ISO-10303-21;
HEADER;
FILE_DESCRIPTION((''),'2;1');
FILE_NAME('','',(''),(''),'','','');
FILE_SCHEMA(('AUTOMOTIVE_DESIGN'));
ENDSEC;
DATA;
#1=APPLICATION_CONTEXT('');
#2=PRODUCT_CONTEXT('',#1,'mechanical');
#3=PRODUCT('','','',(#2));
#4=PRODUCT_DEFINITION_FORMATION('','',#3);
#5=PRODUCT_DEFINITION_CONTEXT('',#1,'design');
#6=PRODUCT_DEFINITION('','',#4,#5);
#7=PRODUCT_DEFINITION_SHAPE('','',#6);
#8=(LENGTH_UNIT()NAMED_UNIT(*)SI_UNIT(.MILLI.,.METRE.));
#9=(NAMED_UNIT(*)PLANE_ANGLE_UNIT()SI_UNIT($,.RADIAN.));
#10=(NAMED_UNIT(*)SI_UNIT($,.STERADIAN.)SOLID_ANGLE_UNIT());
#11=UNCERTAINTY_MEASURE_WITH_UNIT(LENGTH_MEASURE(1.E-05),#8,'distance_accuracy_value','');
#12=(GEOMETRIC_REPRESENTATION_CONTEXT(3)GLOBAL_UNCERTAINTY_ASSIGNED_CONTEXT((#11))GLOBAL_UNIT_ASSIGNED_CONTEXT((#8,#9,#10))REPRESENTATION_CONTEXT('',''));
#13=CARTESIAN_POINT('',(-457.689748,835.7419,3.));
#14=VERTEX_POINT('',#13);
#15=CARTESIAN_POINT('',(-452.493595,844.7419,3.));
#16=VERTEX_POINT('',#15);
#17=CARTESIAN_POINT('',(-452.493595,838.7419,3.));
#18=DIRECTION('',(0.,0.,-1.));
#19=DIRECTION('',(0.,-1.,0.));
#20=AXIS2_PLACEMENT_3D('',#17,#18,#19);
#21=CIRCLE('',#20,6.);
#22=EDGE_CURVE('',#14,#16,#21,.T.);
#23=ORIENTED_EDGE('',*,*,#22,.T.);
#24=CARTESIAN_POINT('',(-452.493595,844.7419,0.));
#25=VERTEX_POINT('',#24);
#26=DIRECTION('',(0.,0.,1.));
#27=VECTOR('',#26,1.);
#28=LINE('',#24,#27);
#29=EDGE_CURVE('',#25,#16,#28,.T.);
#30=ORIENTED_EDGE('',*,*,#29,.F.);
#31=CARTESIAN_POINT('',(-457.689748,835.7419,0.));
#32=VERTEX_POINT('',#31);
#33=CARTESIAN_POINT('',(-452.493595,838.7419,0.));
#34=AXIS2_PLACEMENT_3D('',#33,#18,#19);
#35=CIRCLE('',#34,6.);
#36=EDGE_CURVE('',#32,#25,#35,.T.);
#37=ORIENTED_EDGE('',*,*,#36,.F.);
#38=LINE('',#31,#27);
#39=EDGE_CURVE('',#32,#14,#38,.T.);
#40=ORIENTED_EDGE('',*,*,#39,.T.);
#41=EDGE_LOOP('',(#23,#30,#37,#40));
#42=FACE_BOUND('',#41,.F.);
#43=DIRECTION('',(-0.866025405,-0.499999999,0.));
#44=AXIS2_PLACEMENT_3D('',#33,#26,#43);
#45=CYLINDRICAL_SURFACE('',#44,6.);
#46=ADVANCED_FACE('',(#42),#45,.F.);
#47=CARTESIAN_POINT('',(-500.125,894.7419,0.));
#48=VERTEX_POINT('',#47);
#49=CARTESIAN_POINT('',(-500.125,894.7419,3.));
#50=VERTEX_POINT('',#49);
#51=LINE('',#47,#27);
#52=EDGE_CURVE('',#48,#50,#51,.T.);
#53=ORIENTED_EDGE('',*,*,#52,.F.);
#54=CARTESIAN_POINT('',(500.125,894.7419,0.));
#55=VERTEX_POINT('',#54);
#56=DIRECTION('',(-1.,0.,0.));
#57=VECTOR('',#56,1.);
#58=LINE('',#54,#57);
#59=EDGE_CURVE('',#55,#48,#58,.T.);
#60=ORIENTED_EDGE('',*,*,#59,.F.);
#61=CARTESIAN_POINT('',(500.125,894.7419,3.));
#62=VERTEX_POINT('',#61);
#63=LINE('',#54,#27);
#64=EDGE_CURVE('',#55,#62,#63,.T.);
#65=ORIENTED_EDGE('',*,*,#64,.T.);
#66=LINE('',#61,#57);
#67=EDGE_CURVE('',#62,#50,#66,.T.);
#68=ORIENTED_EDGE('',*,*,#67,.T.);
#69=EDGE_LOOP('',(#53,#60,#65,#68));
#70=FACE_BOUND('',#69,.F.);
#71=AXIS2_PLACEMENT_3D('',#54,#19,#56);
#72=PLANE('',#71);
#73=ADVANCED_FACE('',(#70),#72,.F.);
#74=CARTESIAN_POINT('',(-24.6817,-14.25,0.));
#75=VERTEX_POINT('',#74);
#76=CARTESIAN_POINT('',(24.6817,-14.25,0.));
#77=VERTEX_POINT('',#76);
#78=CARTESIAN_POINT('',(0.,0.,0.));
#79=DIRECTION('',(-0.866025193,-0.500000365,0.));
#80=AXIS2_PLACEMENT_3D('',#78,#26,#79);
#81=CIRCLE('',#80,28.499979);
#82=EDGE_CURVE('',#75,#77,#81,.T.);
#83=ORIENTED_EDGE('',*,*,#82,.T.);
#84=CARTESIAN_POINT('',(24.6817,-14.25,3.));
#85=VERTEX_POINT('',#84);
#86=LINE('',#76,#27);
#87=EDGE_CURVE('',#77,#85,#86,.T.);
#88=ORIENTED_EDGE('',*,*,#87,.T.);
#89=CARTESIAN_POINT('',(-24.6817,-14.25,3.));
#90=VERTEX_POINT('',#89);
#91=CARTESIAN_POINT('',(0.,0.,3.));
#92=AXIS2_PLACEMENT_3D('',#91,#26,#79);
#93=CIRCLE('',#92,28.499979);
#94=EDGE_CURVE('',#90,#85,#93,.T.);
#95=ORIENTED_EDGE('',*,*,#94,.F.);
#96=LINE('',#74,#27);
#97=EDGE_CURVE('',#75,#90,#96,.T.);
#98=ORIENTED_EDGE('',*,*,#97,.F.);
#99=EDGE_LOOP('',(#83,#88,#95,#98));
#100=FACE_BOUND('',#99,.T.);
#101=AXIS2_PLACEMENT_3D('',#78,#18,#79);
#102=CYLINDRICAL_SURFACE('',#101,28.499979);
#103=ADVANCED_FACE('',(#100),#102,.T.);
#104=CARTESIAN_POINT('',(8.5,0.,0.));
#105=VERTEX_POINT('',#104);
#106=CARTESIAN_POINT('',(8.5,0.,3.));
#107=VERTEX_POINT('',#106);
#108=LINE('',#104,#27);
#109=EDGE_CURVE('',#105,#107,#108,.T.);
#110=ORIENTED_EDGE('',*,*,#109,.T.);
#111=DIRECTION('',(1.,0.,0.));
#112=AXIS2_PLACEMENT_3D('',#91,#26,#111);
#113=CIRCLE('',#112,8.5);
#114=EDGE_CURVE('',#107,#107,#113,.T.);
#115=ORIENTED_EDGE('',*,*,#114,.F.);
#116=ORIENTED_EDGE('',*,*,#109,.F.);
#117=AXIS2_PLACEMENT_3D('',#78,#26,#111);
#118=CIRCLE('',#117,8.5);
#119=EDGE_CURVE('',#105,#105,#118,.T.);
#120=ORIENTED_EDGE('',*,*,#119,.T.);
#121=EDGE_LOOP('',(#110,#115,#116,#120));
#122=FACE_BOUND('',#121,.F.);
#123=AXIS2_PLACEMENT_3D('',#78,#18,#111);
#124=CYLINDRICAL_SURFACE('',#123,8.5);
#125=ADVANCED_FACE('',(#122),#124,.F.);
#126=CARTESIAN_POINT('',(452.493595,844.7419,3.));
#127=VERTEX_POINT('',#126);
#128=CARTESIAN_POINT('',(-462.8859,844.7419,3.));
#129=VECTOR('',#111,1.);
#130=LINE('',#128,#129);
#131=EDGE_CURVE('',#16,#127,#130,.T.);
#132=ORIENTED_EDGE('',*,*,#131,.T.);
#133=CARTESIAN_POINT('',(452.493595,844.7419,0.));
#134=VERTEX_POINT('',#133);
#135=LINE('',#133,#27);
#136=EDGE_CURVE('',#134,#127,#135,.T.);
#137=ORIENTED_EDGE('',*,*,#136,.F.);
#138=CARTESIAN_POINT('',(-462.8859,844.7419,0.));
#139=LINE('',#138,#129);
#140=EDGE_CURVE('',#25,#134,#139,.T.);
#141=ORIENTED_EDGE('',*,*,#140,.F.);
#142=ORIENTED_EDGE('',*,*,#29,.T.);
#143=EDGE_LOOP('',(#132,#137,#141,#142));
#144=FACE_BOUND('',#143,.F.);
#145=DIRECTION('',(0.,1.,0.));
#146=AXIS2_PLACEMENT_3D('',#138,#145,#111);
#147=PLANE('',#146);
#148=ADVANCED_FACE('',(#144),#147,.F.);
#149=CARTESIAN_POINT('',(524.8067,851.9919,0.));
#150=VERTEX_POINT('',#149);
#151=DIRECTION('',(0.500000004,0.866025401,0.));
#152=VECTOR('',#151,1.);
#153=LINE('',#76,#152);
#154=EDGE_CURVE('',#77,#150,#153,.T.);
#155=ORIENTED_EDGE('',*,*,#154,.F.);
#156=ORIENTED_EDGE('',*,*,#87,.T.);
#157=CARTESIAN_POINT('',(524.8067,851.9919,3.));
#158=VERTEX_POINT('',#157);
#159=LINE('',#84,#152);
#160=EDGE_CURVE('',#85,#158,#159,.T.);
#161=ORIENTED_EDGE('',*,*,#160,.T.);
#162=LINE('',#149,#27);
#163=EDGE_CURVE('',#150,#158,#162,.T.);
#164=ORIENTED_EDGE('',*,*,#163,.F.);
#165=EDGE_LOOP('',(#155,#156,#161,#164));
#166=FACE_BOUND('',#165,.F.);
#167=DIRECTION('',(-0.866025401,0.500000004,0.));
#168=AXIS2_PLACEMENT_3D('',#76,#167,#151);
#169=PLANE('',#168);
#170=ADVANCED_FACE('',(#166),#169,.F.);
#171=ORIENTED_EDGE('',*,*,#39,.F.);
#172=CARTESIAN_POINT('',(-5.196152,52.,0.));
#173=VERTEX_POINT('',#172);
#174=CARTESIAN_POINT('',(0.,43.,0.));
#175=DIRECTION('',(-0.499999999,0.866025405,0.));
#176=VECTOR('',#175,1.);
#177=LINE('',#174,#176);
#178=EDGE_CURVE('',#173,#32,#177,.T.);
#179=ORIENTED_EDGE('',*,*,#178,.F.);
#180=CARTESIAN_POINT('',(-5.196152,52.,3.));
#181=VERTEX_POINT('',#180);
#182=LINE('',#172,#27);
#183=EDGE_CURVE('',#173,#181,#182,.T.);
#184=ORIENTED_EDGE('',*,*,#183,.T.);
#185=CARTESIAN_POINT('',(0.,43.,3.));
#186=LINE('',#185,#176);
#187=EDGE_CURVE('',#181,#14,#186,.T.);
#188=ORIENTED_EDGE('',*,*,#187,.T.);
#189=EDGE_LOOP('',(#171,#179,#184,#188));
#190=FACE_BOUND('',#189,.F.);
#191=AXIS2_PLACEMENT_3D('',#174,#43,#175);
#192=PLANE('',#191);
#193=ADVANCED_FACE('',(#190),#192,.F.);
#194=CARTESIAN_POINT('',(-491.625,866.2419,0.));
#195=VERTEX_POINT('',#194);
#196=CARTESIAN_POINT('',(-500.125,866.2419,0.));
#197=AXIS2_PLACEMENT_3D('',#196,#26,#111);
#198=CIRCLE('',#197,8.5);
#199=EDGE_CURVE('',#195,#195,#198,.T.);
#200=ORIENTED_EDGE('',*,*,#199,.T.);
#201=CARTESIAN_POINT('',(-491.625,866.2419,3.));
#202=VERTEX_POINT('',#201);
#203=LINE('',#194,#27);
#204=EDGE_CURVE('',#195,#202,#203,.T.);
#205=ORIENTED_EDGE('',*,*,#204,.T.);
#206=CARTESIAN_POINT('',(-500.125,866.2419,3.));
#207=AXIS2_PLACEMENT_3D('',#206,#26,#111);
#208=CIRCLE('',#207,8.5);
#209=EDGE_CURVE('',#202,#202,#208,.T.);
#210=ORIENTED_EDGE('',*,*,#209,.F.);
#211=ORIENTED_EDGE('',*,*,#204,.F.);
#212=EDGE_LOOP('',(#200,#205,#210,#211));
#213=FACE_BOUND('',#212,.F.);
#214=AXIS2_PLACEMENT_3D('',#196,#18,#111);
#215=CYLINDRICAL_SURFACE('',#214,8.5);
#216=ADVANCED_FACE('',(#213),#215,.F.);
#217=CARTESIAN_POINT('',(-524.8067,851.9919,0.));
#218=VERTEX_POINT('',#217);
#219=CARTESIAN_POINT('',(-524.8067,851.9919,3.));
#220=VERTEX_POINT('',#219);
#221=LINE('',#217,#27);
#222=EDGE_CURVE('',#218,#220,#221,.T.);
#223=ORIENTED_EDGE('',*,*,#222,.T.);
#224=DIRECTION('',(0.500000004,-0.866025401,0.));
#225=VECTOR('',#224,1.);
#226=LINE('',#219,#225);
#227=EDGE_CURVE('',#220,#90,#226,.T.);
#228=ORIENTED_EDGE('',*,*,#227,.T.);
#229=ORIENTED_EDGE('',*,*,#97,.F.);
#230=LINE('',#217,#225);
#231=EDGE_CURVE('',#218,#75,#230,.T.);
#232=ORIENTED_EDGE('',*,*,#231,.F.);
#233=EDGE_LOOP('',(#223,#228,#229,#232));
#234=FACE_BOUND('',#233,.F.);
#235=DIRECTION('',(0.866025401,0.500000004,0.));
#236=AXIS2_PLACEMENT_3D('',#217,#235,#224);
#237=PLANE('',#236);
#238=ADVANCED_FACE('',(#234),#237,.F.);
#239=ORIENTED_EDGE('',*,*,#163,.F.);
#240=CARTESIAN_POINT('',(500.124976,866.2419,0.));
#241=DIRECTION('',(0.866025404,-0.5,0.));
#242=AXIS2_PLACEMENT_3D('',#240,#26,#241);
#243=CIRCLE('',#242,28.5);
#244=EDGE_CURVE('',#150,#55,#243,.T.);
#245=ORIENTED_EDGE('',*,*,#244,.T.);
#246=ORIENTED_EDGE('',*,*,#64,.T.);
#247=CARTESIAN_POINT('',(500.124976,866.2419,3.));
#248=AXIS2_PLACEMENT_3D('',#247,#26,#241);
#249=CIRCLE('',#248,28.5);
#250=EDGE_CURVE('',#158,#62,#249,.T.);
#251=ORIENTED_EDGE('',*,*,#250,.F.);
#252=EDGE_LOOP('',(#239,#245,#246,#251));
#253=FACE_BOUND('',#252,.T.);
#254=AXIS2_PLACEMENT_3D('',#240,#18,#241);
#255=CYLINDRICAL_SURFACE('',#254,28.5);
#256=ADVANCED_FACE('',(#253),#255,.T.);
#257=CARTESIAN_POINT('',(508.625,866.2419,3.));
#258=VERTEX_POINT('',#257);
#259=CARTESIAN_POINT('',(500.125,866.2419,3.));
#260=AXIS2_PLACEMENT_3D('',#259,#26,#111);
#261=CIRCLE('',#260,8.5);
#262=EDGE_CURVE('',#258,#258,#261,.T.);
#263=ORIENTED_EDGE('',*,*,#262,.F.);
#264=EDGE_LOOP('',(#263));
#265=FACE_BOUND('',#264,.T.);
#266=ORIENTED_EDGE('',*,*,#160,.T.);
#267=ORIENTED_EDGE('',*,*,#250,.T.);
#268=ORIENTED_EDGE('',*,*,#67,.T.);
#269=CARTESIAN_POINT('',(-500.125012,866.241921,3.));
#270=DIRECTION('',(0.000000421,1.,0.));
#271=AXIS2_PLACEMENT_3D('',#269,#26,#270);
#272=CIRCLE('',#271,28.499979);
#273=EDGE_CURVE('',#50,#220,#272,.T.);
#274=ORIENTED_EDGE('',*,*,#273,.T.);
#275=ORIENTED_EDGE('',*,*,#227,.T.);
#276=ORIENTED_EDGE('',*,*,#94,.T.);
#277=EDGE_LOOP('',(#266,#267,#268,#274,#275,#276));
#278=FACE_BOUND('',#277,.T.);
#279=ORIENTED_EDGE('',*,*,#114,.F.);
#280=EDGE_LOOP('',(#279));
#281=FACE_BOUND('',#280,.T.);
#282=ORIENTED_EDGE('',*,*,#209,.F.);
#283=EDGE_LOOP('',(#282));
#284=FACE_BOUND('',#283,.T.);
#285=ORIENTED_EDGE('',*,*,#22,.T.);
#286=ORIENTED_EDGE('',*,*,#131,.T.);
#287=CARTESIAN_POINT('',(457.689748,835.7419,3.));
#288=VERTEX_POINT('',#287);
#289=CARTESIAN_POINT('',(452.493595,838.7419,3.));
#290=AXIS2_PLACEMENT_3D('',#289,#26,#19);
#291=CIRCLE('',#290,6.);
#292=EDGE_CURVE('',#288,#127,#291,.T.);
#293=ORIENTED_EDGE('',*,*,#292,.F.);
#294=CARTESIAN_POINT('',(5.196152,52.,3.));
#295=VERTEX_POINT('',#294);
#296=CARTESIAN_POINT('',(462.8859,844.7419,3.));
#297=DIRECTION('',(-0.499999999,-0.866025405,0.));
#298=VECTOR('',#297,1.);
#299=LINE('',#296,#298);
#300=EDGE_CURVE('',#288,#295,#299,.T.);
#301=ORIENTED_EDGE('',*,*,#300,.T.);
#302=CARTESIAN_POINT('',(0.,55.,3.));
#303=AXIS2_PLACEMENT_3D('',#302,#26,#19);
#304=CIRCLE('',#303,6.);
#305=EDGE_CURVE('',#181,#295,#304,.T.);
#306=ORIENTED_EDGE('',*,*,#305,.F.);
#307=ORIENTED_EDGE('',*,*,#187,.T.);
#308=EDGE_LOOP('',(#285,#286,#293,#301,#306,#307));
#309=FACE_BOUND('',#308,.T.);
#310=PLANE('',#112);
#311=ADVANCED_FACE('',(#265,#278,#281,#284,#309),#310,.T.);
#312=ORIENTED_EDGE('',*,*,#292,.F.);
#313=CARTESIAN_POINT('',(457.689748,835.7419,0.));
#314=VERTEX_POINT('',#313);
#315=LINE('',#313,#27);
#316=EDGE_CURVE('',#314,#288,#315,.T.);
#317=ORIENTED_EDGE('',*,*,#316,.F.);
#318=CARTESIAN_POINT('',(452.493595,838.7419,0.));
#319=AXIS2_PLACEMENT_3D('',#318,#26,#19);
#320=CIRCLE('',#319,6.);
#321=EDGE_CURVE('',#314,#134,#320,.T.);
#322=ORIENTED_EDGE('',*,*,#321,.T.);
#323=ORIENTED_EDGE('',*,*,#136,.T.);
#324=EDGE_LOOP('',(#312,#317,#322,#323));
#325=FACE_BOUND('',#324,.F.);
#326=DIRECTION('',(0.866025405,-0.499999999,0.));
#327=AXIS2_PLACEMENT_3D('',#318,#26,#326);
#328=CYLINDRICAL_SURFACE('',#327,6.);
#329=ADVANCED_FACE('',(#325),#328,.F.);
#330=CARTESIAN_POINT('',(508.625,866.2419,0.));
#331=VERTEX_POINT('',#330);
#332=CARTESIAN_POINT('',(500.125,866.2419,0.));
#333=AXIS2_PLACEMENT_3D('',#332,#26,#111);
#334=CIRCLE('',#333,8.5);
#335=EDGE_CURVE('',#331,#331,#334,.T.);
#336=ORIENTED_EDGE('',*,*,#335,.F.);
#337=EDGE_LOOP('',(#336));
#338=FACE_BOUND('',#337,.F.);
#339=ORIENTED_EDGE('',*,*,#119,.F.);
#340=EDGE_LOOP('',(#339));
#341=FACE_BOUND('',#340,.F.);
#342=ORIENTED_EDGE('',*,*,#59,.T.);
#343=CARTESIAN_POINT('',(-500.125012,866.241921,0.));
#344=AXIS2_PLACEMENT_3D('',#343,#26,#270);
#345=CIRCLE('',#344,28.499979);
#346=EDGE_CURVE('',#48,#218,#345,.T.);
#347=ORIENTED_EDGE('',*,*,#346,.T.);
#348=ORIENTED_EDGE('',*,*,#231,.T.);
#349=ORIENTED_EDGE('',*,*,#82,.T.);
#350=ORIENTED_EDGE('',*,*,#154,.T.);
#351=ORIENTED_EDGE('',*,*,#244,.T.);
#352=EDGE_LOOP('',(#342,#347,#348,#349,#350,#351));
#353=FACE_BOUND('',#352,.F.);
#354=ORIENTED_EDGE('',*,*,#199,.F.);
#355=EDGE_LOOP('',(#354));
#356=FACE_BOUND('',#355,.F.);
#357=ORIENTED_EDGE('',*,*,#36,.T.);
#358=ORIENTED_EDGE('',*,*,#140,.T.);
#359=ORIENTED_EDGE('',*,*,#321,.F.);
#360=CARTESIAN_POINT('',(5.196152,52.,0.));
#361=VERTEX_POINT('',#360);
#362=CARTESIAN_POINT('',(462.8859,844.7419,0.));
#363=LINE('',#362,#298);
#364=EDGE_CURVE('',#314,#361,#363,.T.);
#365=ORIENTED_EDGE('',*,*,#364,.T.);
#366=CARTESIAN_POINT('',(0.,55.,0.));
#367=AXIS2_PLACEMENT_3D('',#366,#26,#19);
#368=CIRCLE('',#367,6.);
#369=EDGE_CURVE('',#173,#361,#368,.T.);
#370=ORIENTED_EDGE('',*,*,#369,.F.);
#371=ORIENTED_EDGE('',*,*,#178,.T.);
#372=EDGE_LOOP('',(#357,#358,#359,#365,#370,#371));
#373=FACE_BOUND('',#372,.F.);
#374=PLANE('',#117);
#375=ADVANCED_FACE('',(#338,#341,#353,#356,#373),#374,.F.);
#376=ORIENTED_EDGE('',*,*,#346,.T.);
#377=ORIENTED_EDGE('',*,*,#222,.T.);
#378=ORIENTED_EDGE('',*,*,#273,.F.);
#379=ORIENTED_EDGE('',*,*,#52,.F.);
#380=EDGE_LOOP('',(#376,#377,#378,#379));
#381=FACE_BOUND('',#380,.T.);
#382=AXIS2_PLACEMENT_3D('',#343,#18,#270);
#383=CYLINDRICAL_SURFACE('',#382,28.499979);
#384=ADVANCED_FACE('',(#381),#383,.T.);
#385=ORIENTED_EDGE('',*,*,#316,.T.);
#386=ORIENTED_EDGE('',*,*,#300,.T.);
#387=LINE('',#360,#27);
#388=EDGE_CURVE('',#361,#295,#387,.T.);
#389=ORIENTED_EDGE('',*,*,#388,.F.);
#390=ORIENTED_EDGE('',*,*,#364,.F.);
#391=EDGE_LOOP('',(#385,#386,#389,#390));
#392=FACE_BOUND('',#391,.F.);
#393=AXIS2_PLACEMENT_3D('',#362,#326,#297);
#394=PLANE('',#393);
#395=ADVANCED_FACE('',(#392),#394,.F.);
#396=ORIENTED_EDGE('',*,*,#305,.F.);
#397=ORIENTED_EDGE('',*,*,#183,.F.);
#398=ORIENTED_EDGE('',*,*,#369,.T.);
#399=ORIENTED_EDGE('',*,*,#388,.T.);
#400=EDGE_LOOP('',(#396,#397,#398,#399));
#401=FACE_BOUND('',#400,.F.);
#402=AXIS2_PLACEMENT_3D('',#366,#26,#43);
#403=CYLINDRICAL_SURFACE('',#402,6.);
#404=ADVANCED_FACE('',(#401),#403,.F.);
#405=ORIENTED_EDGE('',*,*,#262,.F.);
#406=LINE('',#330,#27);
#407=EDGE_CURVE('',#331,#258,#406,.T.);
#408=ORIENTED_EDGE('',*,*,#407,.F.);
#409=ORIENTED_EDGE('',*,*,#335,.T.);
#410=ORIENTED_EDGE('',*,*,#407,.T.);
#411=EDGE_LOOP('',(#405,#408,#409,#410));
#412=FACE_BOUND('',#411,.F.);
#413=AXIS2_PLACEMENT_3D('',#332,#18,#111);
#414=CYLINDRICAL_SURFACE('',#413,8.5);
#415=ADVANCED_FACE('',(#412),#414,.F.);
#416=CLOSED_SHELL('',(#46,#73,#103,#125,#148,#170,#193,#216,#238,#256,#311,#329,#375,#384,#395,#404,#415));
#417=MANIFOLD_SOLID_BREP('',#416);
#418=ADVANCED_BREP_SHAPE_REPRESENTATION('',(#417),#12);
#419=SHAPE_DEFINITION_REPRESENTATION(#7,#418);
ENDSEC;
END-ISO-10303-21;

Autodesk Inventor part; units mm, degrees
ref_plane "YZ Plane" through (0, 0, 0) normal (1, 0, 0) x (0, 1, 0)
ref_plane "XZ Plane" through (0, 0, 0) normal (0, 1, 0) x (-1, 0, 0)
ref_plane "XY Plane" through (0, 0, 0) normal (0, 0, 1) x (1, 0, 0)
sketch "Sketch1" plane through (0, 0, 0) normal (0, 0, 1) x (1, 0, 0)
  circle A0 centre (0, 0) radius 8.5
  line L0 (-524.8067, 851.9919) -> (-24.6817, -14.25)
  arc A1 (-24.6817, -14.25) -> (24.6817, -14.25) centre (0, 0) ccw
  line L1 (24.6817, -14.25) -> (524.8067, 851.9919)
  arc A2 (524.8067, 851.9919) -> (500.125, 894.7419) centre (500.125, 866.2419) ccw
  line L2 (500.125, 894.7419) -> (-500.125, 894.7419)
  arc A3 (-500.125, 894.7419) -> (-524.8067, 851.9919) centre (-500.125, 866.2419) ccw
  line L3 (0, 0) -> (0, 894.7419) construction
  line L4 (-462.8859, 844.7419) -> (462.8859, 844.7419)
  line L5 (462.8859, 844.7419) -> (0, 43)
  line L6 (0, 43) -> (-462.8859, 844.7419)
  circle A4 centre (-500.125, 866.2419) radius 8.5
  circle A5 centre (500.125, 866.2419) radius 8.5
  dimension "d34" = 17
  dimension "d35" = 20
  dimension "d36" = 1000.25
  dimension "d37" = 1000.25
  dimension "d38" = 50
  dimension "d39" = 17
  dimension "d40" = 17
extrude "Plate1" add sketch "Sketch1" along normal blind 3
fillet "Corner Round3" radius 6 3 edges at (-462.8859, 844.7419, 1.5) (0, 43, 1.5) (462.8859, 844.7419, 1.5)
equation "\"d37\" = d36"
equation "\"d2\" = Thickness"
equation "\"BendReliefWidth\" = Thickness"
equation "\"BendReliefDepth\" = 0.5 * Thickness"
equation "\"CornerReliefSize\" = 4 * Thickness"
equation "\"MinimumRemnant\" = 2 * Thickness"
equation "\"TransitionRadius\" = BendRadius"
equation "\"JacobiRadiusSize\" = BendRadius"
equation "\"GapSize\" = Thickness"
equation "\"Thickness\" = 3"
equation "\"BendRadius\" = 5"
properties part number "TZS 0989 leg pattern" material "Stainless Steel"
